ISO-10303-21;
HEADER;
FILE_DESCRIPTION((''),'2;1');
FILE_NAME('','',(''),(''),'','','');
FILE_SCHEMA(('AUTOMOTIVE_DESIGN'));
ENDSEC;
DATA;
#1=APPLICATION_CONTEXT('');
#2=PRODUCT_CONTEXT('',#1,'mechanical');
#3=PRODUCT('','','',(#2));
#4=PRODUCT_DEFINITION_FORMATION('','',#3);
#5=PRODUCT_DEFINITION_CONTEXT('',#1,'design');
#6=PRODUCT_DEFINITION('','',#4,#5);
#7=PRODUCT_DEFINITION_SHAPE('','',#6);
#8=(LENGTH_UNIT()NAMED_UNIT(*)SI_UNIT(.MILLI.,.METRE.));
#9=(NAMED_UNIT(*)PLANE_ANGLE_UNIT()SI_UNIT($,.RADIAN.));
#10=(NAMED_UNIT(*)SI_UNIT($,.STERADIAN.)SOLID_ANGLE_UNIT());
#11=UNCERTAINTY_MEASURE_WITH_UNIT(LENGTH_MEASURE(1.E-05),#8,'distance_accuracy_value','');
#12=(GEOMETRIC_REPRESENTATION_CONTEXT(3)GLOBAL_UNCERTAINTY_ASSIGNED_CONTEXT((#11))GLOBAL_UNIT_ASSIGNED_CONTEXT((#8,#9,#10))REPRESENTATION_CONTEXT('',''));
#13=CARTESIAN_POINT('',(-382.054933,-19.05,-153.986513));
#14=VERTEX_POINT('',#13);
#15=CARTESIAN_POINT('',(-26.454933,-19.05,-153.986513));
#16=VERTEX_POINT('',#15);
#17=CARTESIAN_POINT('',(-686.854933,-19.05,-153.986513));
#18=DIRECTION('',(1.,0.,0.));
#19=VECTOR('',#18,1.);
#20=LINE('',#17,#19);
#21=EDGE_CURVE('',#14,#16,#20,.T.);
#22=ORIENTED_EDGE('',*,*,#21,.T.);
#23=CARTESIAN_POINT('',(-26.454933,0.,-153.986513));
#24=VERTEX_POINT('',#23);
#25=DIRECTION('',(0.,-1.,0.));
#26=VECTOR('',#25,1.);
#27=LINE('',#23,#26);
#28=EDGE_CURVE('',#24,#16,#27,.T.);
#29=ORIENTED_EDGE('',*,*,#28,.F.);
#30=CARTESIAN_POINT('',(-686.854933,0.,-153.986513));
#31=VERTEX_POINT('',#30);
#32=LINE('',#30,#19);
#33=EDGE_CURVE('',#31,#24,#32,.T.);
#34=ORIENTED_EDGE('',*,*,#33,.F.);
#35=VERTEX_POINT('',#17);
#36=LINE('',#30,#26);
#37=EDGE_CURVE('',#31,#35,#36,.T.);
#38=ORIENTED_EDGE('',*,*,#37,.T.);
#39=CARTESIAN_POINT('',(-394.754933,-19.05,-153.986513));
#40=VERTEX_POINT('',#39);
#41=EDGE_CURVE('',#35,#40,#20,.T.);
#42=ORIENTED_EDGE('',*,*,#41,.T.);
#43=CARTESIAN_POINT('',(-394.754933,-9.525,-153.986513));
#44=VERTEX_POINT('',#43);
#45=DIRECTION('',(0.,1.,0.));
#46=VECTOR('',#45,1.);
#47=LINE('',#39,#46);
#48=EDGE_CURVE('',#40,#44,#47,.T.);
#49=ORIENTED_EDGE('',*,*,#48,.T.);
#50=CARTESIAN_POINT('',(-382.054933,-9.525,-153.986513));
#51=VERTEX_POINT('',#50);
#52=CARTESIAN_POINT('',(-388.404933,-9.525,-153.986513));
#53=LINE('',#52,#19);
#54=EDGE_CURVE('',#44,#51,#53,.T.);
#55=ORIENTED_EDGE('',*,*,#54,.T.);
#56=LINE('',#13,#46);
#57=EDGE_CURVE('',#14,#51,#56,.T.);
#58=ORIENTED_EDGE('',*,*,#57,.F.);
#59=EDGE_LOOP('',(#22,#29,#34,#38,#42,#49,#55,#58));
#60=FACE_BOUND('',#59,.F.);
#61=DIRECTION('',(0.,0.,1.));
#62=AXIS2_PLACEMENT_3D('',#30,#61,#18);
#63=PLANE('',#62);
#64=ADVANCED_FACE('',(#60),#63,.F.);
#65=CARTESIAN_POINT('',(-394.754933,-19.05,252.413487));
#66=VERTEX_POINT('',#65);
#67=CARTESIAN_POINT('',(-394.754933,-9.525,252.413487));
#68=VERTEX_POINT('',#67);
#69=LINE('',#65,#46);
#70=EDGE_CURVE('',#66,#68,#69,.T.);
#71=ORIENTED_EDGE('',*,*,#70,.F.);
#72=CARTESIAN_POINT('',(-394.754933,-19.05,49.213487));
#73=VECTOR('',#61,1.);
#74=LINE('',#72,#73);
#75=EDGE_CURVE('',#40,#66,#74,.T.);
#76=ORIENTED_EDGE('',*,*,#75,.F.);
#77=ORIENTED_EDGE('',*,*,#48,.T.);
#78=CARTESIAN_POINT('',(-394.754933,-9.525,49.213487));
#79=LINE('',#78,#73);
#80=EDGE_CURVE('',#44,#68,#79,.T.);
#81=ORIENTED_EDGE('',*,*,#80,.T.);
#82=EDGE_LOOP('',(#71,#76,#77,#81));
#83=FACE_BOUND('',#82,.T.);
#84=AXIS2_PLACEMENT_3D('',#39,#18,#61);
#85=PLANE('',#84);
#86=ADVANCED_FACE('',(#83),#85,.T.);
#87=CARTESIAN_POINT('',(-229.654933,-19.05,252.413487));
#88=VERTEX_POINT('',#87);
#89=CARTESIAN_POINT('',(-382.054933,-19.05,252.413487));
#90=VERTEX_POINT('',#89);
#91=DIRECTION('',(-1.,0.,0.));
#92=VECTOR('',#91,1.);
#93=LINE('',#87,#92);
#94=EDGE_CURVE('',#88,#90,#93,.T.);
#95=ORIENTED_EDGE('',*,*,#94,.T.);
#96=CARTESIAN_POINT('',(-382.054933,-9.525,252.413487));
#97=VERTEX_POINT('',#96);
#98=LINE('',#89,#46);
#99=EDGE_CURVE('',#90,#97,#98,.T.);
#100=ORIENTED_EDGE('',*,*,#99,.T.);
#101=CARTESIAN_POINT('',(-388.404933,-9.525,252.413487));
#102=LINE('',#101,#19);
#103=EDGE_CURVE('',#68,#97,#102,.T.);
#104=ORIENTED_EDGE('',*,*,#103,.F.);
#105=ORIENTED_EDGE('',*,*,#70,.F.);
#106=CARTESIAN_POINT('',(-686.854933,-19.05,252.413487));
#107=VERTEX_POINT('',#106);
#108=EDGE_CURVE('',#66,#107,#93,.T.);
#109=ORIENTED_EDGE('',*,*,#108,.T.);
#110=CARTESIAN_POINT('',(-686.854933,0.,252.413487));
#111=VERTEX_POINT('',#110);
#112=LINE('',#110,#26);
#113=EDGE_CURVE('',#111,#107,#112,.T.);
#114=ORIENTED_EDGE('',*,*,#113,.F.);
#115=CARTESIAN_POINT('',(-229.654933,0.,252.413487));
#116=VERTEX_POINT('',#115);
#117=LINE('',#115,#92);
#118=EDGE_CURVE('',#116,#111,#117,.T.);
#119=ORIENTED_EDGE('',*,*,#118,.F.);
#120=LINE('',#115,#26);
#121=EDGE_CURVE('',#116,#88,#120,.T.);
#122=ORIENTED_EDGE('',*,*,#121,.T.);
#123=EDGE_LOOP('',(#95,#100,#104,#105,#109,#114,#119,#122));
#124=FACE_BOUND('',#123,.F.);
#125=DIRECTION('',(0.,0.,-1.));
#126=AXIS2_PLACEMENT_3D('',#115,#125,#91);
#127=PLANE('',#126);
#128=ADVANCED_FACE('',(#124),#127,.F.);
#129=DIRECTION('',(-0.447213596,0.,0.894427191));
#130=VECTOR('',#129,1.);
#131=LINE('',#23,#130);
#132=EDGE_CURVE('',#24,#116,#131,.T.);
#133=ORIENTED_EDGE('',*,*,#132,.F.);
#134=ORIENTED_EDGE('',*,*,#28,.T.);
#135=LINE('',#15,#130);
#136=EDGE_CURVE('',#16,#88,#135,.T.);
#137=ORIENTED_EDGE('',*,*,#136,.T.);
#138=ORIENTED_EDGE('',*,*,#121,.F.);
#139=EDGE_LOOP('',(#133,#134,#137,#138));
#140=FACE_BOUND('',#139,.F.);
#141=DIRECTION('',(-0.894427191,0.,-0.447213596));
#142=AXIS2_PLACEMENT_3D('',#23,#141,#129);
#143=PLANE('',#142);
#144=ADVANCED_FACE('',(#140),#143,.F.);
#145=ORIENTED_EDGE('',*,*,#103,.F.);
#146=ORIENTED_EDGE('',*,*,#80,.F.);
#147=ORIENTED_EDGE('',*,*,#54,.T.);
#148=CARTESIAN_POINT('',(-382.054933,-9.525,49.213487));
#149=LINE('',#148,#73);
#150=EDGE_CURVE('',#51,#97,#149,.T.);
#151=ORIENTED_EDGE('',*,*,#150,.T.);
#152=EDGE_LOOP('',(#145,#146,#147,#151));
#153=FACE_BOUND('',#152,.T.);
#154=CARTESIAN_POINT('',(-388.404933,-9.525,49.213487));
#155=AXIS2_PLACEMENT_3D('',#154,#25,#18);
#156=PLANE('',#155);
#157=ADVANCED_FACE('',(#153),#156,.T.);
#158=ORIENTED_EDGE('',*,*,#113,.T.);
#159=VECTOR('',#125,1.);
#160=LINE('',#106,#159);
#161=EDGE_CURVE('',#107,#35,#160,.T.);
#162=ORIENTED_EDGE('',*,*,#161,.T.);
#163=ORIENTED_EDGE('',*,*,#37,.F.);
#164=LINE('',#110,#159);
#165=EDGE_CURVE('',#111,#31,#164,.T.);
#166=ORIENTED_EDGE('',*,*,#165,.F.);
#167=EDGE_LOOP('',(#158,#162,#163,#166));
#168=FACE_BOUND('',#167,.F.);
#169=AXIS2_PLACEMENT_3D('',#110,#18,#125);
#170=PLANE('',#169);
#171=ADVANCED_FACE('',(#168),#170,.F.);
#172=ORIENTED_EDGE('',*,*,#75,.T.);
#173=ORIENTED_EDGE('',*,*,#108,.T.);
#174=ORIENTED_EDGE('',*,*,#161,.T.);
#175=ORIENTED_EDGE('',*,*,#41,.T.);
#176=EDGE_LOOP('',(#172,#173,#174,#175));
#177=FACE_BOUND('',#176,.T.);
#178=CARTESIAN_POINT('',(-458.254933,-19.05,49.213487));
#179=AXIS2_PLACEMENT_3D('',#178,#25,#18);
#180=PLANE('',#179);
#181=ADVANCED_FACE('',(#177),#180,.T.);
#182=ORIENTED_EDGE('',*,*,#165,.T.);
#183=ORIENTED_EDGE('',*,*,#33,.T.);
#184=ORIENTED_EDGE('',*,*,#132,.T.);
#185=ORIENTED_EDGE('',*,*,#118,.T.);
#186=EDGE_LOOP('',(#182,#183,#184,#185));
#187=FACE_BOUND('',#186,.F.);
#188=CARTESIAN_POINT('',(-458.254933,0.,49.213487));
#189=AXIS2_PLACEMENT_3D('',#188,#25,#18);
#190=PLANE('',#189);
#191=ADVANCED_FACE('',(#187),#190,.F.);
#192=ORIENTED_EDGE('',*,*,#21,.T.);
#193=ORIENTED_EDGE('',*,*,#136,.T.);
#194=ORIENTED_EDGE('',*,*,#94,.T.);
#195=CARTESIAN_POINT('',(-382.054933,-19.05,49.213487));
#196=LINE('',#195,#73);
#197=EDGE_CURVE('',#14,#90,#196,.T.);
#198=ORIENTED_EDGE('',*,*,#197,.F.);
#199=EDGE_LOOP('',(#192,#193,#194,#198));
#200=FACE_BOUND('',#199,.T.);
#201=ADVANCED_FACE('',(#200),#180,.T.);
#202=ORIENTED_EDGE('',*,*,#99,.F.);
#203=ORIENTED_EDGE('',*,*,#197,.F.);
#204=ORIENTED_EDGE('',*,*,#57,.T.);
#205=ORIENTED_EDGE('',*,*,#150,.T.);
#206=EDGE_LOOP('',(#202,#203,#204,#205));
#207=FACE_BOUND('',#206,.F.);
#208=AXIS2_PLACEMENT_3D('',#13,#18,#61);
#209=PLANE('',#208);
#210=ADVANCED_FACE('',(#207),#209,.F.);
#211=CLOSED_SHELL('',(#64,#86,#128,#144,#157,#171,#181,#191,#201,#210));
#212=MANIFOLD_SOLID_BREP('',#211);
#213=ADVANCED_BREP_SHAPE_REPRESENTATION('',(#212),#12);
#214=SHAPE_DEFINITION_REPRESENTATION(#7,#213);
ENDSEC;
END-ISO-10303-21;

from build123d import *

# Parameters (mm, degrees)
F1_DEPTH = 19.05
F2_W     = 12.7
F2_H     = 406.4
F3_DEPTH = 9.525


# Not quite as in the source:
# - a feature names something its author has since deleted; it is built from what else it names


with BuildPart() as f1:
    # F0 (on Front) → F1 (new body)
    with BuildSketch(Plane.XZ):
        Polygon((-229.6549332498, 252.4134865394), (-356.6549332498, 252.4134865394), (-686.8549332498, 252.4134865394), (-686.8549332498, -153.9865134606), (-356.6549332498, -153.9865134606), (-229.6549332498, -153.9865134606), align=None)
        Polygon((-26.4549332498, -153.9865134606), (-229.6549332498, 252.4134865394), (-229.6549332498, -153.9865134606), align=None)
    extrude(amount=F1_DEPTH)

    # F2 (on face) → F3 (cut)
    with BuildSketch(Plane.XZ.offset(19.05)):
        with Locations((-388.4049332498, 49.2134865394)):
            Rectangle(F2_W, F2_H)
    extrude(amount=-F3_DEPTH, mode=Mode.SUBTRACT)


solid = f1.part
